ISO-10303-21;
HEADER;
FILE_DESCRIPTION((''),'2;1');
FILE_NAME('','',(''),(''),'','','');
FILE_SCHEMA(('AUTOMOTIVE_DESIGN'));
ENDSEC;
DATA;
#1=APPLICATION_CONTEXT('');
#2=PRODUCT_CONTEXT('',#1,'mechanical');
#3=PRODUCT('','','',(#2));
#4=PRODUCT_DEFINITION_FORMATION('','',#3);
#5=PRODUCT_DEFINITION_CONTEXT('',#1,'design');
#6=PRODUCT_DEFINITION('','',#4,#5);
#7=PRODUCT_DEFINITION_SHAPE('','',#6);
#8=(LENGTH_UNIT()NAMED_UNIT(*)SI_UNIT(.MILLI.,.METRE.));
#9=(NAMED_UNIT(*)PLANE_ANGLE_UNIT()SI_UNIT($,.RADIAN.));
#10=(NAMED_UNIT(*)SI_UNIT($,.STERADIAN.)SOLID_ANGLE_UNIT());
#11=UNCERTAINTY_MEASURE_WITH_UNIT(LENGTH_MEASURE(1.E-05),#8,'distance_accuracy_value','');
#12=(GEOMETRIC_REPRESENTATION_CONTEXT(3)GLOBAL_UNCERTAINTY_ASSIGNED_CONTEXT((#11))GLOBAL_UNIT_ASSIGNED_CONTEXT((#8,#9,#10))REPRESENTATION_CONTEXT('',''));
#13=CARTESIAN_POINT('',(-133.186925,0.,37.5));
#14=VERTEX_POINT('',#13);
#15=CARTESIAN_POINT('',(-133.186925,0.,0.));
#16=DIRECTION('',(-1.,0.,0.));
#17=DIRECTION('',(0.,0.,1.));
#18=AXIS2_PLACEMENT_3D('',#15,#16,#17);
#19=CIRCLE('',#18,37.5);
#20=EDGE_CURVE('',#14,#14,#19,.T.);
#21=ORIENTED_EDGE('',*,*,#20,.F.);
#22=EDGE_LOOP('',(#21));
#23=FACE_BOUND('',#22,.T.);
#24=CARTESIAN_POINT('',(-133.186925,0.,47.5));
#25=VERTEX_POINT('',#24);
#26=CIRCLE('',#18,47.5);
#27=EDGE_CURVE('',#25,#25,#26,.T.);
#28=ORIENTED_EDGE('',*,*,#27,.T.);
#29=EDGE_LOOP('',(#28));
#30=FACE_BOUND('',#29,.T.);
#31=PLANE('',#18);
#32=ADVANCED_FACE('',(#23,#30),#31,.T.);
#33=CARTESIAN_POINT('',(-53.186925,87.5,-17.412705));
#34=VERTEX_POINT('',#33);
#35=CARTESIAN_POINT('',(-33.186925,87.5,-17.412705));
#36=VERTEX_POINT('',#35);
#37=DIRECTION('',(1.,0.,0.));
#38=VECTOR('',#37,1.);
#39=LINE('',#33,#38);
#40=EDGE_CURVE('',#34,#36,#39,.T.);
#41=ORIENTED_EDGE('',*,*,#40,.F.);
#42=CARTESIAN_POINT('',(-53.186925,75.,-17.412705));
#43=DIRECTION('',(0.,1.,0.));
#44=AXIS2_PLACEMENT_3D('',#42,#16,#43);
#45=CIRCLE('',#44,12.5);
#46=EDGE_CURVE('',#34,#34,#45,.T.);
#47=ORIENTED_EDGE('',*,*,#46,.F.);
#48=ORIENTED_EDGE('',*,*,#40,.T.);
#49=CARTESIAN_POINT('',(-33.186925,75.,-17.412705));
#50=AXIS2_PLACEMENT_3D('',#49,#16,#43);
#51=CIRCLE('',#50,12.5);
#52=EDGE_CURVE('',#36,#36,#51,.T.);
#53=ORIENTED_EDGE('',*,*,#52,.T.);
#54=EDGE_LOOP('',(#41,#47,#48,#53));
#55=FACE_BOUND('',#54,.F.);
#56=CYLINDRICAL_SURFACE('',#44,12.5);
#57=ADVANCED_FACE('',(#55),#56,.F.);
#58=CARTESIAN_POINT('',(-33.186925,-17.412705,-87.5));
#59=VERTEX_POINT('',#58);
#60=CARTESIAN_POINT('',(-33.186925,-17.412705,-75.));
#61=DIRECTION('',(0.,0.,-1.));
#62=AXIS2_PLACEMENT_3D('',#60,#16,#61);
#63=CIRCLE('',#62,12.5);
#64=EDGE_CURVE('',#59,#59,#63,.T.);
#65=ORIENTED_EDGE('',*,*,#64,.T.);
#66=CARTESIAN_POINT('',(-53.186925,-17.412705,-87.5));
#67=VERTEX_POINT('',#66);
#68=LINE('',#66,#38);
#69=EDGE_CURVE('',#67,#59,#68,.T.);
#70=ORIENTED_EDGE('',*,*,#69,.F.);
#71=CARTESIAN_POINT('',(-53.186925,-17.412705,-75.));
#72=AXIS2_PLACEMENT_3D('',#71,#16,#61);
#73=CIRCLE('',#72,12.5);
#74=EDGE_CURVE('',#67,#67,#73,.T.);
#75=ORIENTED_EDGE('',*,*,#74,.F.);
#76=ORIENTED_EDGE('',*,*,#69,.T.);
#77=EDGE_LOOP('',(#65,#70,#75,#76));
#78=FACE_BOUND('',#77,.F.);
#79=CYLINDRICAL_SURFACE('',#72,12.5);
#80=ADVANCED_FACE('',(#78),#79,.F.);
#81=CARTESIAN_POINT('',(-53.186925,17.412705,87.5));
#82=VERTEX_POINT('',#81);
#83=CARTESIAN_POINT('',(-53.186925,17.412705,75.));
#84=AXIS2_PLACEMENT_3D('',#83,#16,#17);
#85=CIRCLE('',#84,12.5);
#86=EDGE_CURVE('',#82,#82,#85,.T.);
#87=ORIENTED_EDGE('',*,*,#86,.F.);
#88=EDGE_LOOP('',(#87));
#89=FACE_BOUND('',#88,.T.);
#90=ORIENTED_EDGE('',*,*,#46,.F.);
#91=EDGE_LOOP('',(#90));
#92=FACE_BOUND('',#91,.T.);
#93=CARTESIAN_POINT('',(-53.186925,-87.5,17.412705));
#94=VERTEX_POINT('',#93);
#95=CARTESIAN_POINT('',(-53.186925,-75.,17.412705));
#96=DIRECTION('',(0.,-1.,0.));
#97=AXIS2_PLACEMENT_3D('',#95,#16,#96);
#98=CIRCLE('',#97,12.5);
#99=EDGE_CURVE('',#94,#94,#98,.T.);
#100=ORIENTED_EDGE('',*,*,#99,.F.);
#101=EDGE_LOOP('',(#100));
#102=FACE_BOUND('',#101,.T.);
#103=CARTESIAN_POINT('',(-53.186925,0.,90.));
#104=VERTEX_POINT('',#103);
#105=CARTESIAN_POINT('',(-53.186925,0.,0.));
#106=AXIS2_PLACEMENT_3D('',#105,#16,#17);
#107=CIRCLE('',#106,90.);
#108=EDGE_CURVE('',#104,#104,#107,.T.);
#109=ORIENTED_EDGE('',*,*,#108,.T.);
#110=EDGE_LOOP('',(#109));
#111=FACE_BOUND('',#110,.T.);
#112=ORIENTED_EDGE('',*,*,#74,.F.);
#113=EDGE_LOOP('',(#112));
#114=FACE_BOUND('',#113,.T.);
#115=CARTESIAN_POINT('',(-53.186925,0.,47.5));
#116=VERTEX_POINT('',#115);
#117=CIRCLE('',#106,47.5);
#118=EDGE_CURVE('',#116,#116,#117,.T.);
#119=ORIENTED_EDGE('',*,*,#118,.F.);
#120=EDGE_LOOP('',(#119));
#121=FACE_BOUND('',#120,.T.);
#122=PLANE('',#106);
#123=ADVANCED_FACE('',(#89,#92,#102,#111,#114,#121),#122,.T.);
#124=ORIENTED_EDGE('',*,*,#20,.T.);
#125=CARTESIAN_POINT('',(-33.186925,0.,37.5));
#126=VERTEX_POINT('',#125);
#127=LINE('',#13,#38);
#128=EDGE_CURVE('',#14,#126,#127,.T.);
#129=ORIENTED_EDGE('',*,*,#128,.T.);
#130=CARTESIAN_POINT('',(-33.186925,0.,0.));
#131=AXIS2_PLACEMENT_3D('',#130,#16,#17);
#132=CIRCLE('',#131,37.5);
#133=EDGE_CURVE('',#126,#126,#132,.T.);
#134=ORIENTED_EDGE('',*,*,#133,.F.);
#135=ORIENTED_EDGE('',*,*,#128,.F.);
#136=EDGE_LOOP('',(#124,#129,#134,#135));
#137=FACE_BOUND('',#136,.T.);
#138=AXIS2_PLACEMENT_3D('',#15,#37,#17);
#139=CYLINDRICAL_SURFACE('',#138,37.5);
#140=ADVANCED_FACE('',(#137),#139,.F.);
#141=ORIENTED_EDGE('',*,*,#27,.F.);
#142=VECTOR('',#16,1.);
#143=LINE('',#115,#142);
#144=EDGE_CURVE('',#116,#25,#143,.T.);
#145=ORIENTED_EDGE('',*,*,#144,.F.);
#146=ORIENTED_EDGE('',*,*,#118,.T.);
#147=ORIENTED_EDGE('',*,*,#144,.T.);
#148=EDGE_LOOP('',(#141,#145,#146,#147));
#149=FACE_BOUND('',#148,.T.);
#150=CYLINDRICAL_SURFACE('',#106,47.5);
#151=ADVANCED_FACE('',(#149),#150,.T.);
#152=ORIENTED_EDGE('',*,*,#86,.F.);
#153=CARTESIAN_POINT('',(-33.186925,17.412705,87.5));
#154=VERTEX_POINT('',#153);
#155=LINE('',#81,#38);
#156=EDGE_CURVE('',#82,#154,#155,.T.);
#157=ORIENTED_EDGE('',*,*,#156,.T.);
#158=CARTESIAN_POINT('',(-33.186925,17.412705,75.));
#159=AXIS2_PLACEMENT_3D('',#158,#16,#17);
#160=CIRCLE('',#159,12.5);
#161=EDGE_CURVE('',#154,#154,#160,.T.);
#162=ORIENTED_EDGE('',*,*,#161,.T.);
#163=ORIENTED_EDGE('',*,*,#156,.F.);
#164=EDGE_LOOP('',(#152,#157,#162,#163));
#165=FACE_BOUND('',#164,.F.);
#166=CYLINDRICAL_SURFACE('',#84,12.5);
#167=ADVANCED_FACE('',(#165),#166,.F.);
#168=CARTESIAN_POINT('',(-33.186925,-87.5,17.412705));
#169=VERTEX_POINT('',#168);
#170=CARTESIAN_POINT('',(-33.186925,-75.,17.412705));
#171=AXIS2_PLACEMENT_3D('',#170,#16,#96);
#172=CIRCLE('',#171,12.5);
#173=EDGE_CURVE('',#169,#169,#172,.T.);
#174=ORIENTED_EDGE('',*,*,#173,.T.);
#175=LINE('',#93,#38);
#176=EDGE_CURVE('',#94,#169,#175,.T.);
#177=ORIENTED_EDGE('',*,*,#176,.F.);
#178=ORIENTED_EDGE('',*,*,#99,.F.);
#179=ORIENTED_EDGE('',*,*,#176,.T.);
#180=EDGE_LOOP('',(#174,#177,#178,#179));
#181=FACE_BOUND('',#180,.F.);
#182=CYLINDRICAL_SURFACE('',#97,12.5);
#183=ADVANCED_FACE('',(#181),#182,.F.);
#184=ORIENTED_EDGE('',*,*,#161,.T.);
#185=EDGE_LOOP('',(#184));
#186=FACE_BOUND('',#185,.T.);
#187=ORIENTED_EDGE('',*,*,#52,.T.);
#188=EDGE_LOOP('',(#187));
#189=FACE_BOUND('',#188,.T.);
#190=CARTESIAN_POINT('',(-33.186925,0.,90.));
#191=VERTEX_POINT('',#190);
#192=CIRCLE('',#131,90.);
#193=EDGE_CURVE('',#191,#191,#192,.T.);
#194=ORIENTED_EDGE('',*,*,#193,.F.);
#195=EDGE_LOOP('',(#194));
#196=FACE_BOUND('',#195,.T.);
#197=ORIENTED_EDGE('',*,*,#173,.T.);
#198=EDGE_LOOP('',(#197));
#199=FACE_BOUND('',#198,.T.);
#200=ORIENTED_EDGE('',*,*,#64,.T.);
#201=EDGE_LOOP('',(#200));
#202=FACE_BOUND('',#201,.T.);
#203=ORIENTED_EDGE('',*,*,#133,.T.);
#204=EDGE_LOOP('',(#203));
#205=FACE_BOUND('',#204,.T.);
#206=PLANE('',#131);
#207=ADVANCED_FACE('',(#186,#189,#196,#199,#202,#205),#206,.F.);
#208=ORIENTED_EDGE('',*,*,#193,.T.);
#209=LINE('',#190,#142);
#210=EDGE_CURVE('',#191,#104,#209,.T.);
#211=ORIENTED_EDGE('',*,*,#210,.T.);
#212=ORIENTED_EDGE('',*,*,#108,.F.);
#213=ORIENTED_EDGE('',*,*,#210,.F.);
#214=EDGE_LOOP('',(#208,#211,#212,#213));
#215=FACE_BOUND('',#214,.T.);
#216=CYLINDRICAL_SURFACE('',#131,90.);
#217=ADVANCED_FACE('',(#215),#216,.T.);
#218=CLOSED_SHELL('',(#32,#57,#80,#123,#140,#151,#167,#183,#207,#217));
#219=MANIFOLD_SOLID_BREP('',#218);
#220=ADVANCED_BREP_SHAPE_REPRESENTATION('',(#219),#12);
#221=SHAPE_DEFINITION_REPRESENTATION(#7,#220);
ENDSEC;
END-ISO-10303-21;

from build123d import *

# Parameters (mm, degrees)
F2_R            = 12.5
F3_DEPTH        = 20.001
F3_COPIES_COUNT = 4


# Not quite as in the source:
# - a pattern or mirror of a feature is missing from the dataset's text; its kind, count and spacing are read off the source's solid


with BuildPart() as f1:
    # F0 (on Front) → F1 (revolve)
    with BuildSketch(Plane.XZ):
        Polygon((-33.186925382, 90), (-53.186925382, 90), (-53.186925382, 47.5), (-133.186925382, 47.5), (-133.186925382, 37.5), (-33.186925382, 37.5), align=None)
    revolve(axis=Axis((-80.5058263218, 0, 0), (-1, 0, 0)))

    # F2 (on face) → F3 (cut, through all)
    with BuildSketch(Plane(origin=(-53.186925382, 0, 0), x_dir=(0, -1, 0), z_dir=(-1, 0, 0))):
        with Locations((75, 17.4127053469)):
            Circle(F2_R)
    f3 = extrude(amount=-F3_DEPTH, mode=Mode.SUBTRACT)

    # F3_copies: F3 ×4 about axis
    f3_copies_axis = Axis((0, 0, 0), (1, 0, 0))
    for i in range(1, F3_COPIES_COUNT):
        add(f3.rotate(f3_copies_axis, i * 360 / F3_COPIES_COUNT), mode=Mode.SUBTRACT)


solid = f1.part
